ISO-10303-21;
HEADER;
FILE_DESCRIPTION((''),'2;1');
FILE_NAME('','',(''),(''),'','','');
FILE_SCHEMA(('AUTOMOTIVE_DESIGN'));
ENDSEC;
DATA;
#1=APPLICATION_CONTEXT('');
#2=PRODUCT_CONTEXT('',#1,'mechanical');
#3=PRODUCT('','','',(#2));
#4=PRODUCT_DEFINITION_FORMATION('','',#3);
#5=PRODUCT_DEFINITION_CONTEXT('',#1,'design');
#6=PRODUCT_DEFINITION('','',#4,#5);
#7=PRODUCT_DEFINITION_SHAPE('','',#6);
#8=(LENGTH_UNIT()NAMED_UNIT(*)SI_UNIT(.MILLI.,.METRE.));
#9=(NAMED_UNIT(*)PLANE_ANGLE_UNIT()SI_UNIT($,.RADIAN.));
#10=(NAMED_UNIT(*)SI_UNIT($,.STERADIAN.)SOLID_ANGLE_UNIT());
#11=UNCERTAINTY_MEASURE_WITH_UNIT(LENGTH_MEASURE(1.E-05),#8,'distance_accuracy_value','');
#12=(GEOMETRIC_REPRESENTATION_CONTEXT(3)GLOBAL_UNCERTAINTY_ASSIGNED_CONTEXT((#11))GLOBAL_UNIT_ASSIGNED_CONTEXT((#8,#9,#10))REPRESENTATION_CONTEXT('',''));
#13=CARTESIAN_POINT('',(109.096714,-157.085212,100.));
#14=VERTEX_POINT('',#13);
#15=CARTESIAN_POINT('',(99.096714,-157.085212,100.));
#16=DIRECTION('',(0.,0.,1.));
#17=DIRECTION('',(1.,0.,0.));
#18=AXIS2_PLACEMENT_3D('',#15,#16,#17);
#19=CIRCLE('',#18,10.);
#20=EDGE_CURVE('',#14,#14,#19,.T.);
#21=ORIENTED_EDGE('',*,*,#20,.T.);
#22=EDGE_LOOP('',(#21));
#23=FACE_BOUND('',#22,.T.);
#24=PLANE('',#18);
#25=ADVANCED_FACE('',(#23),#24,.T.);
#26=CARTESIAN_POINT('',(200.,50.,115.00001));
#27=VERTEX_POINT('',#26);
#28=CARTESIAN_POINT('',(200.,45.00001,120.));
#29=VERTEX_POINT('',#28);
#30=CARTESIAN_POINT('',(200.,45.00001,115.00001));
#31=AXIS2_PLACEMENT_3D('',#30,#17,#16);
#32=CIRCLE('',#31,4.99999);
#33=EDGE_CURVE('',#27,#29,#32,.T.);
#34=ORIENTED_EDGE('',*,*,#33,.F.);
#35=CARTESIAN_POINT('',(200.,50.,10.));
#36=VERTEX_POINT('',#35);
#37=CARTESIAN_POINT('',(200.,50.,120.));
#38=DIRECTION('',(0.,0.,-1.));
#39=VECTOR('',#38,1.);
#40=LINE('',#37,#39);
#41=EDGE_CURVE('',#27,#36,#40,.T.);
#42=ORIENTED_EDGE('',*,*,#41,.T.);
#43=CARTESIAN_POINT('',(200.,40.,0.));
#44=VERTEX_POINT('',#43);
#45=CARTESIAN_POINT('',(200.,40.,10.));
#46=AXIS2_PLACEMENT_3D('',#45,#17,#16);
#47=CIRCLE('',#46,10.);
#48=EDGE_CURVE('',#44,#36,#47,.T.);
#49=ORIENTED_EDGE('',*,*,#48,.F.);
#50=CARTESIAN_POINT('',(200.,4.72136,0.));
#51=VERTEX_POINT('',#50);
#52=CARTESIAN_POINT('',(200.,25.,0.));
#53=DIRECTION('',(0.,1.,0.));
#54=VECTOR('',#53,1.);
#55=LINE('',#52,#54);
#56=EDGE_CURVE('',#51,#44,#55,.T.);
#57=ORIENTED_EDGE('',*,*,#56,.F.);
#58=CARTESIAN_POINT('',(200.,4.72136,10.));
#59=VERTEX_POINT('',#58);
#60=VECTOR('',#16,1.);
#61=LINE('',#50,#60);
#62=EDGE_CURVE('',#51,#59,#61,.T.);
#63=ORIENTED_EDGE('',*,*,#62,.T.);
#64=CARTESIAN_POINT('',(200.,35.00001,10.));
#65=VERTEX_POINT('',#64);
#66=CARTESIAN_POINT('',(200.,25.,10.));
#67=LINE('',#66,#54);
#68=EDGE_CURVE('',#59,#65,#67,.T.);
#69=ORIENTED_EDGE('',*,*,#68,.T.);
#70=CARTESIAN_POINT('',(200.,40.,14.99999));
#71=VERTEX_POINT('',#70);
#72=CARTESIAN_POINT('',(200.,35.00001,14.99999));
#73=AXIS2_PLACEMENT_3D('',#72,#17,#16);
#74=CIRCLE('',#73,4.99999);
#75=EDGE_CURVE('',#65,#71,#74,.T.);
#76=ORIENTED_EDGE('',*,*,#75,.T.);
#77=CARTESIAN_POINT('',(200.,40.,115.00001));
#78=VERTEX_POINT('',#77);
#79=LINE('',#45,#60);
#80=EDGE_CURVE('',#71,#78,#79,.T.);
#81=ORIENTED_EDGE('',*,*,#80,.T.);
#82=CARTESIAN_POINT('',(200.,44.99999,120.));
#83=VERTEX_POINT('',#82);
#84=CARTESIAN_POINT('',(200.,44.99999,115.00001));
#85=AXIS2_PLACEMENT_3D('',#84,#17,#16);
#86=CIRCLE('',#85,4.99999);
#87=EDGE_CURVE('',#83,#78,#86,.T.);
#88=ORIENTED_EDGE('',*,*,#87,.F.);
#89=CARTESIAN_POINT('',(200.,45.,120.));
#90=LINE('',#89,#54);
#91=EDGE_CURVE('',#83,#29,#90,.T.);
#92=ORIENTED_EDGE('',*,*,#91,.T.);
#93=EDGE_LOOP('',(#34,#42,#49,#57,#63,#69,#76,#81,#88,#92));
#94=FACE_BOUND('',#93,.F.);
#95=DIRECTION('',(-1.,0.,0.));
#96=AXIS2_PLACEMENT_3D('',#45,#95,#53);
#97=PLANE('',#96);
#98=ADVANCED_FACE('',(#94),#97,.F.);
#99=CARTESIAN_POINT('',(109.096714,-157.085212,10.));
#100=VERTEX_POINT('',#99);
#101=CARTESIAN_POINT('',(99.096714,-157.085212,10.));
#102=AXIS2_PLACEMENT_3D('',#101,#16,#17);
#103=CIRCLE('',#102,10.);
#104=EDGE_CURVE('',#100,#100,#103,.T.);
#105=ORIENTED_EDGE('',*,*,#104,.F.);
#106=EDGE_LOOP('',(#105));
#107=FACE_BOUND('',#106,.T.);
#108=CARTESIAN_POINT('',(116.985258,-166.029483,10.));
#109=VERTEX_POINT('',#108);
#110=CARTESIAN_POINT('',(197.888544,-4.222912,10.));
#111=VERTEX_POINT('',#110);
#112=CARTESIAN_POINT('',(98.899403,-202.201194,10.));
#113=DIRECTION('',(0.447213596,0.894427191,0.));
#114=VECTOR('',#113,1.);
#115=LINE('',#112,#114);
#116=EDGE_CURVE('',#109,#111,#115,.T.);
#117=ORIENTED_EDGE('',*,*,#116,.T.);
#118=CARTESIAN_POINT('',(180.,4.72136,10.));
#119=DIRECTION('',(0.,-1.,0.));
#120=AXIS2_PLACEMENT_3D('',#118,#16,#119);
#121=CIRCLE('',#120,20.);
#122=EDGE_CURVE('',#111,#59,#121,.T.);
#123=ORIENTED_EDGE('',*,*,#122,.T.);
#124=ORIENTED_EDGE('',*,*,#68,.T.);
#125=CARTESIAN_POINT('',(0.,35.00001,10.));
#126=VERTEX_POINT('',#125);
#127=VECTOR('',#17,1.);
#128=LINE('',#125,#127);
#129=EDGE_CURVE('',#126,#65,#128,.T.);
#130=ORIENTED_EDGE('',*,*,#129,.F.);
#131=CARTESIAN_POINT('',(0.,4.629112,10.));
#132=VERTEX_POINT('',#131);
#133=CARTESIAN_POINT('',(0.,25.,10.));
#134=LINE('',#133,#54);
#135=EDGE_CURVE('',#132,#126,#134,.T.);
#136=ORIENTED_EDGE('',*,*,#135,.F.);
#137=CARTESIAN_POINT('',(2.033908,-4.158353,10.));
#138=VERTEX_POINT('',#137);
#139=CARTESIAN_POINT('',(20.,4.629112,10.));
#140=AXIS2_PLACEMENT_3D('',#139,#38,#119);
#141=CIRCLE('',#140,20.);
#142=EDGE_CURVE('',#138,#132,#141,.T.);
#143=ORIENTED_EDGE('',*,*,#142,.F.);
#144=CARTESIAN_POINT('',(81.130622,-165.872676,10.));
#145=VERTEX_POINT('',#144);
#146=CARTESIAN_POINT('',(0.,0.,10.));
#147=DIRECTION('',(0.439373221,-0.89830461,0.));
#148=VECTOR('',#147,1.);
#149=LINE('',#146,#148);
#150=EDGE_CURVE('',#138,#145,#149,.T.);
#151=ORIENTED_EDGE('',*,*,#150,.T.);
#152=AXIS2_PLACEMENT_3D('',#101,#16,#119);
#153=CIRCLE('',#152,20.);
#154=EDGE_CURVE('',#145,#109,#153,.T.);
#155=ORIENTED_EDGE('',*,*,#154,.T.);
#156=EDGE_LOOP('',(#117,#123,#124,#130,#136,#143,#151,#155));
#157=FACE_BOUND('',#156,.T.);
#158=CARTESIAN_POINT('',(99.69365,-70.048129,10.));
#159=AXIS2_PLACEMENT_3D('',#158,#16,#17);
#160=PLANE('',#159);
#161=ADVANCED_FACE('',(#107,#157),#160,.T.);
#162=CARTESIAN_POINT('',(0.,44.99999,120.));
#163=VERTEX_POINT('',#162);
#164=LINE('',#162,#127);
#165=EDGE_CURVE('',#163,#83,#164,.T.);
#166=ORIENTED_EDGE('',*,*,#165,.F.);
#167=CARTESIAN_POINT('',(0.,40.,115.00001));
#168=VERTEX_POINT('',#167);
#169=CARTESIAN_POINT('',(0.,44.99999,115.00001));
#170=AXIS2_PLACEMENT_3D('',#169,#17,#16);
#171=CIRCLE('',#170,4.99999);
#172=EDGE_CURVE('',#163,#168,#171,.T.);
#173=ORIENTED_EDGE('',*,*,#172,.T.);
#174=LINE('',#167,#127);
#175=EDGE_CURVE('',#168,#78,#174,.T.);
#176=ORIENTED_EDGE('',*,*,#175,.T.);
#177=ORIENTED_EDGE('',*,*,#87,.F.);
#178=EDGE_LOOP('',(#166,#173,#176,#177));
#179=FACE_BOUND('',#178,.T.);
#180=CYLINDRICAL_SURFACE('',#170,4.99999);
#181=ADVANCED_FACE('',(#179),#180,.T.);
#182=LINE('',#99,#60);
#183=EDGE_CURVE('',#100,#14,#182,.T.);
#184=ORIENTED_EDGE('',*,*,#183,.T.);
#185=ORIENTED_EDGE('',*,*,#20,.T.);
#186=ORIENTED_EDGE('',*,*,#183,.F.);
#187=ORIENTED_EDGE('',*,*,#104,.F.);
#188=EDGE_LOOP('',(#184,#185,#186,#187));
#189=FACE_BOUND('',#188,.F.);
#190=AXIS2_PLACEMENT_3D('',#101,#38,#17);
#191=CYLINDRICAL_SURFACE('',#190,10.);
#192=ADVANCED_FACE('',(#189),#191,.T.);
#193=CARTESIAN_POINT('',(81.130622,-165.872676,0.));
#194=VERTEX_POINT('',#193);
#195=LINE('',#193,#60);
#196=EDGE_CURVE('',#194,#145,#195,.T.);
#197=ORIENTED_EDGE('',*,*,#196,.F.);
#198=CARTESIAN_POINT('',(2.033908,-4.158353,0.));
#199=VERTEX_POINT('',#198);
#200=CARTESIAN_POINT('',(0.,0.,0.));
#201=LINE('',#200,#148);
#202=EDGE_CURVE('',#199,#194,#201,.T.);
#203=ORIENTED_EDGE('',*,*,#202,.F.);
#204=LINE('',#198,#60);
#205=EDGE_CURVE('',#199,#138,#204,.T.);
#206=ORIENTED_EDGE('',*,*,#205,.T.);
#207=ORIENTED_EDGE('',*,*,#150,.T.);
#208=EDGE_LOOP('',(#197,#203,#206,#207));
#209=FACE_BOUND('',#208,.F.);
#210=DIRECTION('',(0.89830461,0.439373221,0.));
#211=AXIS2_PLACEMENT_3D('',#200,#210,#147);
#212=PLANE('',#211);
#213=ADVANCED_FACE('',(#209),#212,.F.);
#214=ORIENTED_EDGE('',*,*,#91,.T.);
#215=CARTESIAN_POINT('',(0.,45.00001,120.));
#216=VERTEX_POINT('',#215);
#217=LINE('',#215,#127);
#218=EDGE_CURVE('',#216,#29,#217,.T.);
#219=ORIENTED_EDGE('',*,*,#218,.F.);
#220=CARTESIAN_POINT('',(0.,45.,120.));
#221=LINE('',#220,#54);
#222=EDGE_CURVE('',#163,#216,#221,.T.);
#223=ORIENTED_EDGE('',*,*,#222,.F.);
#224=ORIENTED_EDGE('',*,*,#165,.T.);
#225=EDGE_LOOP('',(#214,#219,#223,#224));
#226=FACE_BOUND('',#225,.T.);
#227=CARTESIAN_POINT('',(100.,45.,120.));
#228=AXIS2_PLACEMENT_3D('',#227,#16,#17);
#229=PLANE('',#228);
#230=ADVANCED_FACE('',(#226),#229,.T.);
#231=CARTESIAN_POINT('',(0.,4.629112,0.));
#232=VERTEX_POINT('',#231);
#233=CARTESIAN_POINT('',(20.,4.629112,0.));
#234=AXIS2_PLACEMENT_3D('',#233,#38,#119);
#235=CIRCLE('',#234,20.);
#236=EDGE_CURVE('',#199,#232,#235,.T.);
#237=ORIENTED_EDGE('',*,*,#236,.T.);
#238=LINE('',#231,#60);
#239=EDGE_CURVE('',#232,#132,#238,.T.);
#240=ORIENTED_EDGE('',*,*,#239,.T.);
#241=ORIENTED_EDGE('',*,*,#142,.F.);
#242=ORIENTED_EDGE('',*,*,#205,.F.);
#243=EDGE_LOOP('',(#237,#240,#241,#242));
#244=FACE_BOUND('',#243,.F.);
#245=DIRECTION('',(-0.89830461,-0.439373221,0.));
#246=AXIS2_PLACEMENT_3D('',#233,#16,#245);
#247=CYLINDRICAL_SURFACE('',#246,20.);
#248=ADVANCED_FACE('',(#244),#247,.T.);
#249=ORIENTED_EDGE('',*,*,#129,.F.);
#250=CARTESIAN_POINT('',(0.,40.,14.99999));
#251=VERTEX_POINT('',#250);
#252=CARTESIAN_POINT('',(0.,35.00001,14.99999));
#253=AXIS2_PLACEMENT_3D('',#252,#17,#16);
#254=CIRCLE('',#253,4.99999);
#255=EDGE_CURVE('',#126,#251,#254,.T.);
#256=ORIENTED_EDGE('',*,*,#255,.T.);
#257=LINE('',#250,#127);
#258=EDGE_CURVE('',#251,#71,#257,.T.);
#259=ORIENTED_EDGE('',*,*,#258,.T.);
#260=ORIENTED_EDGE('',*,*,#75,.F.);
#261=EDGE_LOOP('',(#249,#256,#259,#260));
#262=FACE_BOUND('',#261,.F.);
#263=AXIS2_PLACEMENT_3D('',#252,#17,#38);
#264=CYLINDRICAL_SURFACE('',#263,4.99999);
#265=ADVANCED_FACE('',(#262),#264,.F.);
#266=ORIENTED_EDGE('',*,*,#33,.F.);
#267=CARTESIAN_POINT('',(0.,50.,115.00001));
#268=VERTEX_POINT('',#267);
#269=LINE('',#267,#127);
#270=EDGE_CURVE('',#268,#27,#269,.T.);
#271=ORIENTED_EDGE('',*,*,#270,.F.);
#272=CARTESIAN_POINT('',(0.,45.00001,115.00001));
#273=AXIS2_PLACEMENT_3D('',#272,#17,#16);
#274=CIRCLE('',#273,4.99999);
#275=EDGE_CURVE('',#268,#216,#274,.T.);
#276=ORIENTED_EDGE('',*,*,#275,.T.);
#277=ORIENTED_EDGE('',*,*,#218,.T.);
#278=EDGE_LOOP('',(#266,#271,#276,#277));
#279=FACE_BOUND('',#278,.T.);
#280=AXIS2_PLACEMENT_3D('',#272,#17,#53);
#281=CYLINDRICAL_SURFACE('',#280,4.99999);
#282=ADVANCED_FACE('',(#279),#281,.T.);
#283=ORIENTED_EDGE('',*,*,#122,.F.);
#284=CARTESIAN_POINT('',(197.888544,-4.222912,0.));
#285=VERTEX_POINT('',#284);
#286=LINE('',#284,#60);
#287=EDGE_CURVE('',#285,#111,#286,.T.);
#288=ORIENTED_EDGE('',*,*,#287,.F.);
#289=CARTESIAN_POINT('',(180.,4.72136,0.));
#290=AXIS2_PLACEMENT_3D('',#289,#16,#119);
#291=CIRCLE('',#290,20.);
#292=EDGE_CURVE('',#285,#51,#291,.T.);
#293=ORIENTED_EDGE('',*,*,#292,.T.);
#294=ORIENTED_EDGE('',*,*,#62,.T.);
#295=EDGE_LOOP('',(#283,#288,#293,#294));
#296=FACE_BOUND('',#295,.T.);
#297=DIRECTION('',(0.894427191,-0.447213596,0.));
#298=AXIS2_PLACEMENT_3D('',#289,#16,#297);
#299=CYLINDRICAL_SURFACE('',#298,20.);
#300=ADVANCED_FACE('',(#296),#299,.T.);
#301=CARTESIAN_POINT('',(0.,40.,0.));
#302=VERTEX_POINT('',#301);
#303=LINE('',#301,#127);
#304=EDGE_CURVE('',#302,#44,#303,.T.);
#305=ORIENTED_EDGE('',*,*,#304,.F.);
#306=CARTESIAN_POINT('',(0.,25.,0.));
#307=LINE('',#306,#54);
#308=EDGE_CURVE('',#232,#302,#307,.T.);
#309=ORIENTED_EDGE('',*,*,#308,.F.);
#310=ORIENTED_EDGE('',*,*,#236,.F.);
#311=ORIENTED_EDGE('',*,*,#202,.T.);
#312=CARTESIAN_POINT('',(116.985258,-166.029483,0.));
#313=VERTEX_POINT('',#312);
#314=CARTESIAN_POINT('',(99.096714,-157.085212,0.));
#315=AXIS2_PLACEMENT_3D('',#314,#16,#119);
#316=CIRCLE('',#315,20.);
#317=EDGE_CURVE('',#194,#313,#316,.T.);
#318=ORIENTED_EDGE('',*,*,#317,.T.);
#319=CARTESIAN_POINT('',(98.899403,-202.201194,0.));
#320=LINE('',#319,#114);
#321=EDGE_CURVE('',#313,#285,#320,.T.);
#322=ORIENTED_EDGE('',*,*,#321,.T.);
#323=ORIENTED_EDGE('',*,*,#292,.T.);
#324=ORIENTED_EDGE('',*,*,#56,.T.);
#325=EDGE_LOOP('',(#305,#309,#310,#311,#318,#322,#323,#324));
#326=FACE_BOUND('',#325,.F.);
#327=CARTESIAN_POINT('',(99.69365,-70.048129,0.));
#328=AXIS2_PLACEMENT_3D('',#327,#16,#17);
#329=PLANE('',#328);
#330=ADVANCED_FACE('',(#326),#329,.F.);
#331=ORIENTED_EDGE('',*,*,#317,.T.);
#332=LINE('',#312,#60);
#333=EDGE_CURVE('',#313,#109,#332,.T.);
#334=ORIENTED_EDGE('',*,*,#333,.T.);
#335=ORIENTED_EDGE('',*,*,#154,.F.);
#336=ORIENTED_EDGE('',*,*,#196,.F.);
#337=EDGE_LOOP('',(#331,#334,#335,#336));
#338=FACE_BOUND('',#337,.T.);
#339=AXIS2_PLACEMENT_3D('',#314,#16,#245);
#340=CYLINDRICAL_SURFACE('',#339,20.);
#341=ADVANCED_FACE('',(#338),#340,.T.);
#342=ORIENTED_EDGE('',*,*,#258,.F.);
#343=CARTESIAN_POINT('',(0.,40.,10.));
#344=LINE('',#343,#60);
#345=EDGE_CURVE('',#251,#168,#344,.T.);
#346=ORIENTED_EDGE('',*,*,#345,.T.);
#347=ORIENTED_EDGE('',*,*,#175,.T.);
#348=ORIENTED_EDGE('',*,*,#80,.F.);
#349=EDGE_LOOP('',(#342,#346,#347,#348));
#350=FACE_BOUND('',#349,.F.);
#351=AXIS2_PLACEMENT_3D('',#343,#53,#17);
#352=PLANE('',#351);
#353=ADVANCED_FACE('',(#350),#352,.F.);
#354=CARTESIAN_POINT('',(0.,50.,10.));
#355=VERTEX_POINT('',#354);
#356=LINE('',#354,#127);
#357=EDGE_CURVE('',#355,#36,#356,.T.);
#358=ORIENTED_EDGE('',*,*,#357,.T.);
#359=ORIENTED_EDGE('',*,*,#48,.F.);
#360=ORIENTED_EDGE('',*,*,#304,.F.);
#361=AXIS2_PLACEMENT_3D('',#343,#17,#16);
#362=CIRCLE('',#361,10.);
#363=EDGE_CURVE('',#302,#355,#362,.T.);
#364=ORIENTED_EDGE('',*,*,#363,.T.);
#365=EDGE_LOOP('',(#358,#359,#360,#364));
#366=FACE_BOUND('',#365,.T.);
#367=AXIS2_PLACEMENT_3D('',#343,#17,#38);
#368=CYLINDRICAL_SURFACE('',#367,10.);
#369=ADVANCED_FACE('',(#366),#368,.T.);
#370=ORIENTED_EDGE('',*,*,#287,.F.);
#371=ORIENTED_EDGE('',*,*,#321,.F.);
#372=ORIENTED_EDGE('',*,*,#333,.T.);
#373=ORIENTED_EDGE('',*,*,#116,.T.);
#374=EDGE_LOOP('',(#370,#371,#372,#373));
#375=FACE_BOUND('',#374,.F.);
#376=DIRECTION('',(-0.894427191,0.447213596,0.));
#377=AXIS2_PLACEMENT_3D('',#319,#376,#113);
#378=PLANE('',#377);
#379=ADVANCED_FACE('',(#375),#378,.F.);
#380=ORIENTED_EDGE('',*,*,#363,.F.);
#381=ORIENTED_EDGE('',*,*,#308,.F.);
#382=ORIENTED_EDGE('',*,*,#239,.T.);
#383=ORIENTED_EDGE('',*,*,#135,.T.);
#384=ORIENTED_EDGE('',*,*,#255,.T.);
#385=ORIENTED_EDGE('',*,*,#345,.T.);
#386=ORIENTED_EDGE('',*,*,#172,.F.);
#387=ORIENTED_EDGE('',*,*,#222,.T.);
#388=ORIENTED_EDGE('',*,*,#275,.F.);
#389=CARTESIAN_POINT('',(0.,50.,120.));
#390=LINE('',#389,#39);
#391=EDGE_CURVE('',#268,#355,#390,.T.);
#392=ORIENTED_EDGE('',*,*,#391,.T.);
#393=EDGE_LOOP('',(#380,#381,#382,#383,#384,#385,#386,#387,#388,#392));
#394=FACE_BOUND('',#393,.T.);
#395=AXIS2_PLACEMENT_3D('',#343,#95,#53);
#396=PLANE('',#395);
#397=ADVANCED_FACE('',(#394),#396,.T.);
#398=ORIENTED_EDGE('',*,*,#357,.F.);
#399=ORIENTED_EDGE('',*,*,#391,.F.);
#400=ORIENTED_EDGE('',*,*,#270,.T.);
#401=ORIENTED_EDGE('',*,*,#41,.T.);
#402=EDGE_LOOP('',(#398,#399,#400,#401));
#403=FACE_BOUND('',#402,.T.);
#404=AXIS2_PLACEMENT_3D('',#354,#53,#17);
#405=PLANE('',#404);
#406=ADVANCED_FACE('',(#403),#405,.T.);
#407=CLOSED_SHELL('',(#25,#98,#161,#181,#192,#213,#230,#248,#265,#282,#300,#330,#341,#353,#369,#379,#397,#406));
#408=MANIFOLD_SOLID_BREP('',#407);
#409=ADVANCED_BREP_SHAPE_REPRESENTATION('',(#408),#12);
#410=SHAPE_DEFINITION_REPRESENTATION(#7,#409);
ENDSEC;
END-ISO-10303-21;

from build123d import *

# Parameters (mm, degrees)
F0_W     = 200
F0_H     = 50
F1_DEPTH = 10
F2_R     = 20
F3_R     = 10
F4_DEPTH = 90
F5_W     = 200
F5_H     = 10
F6_DEPTH = 110
F7_R     = 4.99999
F8_R     = 10


# Not quite as in the source:
# - a fillet or chamfer is up to 0.001 mm smaller than in the source, because OpenCascade refuses the exact size


with BuildPart() as f1:
    # F0 (on Top) → F1 (new body)
    with BuildSketch(Plane.XY):
        Polygon((200, 0), (0, 0), (98.8994031925, -202.201193615), align=None)
        with Locations((100, 25)):
            Rectangle(F0_W, F0_H)
    extrude(amount=F1_DEPTH)

    # F2
    f2_edges = [f1.edges().sort_by_distance(p)[0] for p in [
        (98.899403, -202.201194, 5),
        (200, 0, 5),
        (0, 0, 5),
    ]]
    fillet(f2_edges, radius=F2_R)

    # F3 (on face) → F4 (join)
    with BuildSketch(Plane.XY.offset(10)):
        with Locations((99.0967144561, -157.0852115379)):
            Circle(F3_R)
    extrude(amount=F4_DEPTH)

    # F5 (on face) → F6 (join)
    with BuildSketch(Plane.XY.offset(10)):
        with Locations((100, 45)):
            Rectangle(F5_W, F5_H)
    extrude(amount=F6_DEPTH)

    # F7 (radius 5 in the source; OpenCascade refuses exactly that, so slightly less here)
    f7_edges = [f1.edges().sort_by_distance(p)[0] for p in [
        (100, 50, 120),
        (100, 40, 120),
        (100, 40, 10),
    ]]
    fillet(f7_edges, radius=F7_R)

    # F8
    f8_edges = [f1.edges().sort_by_distance(p)[0] for p in [
        (100, 50, 0),
    ]]
    fillet(f8_edges, radius=F8_R)


solid = f1.part
